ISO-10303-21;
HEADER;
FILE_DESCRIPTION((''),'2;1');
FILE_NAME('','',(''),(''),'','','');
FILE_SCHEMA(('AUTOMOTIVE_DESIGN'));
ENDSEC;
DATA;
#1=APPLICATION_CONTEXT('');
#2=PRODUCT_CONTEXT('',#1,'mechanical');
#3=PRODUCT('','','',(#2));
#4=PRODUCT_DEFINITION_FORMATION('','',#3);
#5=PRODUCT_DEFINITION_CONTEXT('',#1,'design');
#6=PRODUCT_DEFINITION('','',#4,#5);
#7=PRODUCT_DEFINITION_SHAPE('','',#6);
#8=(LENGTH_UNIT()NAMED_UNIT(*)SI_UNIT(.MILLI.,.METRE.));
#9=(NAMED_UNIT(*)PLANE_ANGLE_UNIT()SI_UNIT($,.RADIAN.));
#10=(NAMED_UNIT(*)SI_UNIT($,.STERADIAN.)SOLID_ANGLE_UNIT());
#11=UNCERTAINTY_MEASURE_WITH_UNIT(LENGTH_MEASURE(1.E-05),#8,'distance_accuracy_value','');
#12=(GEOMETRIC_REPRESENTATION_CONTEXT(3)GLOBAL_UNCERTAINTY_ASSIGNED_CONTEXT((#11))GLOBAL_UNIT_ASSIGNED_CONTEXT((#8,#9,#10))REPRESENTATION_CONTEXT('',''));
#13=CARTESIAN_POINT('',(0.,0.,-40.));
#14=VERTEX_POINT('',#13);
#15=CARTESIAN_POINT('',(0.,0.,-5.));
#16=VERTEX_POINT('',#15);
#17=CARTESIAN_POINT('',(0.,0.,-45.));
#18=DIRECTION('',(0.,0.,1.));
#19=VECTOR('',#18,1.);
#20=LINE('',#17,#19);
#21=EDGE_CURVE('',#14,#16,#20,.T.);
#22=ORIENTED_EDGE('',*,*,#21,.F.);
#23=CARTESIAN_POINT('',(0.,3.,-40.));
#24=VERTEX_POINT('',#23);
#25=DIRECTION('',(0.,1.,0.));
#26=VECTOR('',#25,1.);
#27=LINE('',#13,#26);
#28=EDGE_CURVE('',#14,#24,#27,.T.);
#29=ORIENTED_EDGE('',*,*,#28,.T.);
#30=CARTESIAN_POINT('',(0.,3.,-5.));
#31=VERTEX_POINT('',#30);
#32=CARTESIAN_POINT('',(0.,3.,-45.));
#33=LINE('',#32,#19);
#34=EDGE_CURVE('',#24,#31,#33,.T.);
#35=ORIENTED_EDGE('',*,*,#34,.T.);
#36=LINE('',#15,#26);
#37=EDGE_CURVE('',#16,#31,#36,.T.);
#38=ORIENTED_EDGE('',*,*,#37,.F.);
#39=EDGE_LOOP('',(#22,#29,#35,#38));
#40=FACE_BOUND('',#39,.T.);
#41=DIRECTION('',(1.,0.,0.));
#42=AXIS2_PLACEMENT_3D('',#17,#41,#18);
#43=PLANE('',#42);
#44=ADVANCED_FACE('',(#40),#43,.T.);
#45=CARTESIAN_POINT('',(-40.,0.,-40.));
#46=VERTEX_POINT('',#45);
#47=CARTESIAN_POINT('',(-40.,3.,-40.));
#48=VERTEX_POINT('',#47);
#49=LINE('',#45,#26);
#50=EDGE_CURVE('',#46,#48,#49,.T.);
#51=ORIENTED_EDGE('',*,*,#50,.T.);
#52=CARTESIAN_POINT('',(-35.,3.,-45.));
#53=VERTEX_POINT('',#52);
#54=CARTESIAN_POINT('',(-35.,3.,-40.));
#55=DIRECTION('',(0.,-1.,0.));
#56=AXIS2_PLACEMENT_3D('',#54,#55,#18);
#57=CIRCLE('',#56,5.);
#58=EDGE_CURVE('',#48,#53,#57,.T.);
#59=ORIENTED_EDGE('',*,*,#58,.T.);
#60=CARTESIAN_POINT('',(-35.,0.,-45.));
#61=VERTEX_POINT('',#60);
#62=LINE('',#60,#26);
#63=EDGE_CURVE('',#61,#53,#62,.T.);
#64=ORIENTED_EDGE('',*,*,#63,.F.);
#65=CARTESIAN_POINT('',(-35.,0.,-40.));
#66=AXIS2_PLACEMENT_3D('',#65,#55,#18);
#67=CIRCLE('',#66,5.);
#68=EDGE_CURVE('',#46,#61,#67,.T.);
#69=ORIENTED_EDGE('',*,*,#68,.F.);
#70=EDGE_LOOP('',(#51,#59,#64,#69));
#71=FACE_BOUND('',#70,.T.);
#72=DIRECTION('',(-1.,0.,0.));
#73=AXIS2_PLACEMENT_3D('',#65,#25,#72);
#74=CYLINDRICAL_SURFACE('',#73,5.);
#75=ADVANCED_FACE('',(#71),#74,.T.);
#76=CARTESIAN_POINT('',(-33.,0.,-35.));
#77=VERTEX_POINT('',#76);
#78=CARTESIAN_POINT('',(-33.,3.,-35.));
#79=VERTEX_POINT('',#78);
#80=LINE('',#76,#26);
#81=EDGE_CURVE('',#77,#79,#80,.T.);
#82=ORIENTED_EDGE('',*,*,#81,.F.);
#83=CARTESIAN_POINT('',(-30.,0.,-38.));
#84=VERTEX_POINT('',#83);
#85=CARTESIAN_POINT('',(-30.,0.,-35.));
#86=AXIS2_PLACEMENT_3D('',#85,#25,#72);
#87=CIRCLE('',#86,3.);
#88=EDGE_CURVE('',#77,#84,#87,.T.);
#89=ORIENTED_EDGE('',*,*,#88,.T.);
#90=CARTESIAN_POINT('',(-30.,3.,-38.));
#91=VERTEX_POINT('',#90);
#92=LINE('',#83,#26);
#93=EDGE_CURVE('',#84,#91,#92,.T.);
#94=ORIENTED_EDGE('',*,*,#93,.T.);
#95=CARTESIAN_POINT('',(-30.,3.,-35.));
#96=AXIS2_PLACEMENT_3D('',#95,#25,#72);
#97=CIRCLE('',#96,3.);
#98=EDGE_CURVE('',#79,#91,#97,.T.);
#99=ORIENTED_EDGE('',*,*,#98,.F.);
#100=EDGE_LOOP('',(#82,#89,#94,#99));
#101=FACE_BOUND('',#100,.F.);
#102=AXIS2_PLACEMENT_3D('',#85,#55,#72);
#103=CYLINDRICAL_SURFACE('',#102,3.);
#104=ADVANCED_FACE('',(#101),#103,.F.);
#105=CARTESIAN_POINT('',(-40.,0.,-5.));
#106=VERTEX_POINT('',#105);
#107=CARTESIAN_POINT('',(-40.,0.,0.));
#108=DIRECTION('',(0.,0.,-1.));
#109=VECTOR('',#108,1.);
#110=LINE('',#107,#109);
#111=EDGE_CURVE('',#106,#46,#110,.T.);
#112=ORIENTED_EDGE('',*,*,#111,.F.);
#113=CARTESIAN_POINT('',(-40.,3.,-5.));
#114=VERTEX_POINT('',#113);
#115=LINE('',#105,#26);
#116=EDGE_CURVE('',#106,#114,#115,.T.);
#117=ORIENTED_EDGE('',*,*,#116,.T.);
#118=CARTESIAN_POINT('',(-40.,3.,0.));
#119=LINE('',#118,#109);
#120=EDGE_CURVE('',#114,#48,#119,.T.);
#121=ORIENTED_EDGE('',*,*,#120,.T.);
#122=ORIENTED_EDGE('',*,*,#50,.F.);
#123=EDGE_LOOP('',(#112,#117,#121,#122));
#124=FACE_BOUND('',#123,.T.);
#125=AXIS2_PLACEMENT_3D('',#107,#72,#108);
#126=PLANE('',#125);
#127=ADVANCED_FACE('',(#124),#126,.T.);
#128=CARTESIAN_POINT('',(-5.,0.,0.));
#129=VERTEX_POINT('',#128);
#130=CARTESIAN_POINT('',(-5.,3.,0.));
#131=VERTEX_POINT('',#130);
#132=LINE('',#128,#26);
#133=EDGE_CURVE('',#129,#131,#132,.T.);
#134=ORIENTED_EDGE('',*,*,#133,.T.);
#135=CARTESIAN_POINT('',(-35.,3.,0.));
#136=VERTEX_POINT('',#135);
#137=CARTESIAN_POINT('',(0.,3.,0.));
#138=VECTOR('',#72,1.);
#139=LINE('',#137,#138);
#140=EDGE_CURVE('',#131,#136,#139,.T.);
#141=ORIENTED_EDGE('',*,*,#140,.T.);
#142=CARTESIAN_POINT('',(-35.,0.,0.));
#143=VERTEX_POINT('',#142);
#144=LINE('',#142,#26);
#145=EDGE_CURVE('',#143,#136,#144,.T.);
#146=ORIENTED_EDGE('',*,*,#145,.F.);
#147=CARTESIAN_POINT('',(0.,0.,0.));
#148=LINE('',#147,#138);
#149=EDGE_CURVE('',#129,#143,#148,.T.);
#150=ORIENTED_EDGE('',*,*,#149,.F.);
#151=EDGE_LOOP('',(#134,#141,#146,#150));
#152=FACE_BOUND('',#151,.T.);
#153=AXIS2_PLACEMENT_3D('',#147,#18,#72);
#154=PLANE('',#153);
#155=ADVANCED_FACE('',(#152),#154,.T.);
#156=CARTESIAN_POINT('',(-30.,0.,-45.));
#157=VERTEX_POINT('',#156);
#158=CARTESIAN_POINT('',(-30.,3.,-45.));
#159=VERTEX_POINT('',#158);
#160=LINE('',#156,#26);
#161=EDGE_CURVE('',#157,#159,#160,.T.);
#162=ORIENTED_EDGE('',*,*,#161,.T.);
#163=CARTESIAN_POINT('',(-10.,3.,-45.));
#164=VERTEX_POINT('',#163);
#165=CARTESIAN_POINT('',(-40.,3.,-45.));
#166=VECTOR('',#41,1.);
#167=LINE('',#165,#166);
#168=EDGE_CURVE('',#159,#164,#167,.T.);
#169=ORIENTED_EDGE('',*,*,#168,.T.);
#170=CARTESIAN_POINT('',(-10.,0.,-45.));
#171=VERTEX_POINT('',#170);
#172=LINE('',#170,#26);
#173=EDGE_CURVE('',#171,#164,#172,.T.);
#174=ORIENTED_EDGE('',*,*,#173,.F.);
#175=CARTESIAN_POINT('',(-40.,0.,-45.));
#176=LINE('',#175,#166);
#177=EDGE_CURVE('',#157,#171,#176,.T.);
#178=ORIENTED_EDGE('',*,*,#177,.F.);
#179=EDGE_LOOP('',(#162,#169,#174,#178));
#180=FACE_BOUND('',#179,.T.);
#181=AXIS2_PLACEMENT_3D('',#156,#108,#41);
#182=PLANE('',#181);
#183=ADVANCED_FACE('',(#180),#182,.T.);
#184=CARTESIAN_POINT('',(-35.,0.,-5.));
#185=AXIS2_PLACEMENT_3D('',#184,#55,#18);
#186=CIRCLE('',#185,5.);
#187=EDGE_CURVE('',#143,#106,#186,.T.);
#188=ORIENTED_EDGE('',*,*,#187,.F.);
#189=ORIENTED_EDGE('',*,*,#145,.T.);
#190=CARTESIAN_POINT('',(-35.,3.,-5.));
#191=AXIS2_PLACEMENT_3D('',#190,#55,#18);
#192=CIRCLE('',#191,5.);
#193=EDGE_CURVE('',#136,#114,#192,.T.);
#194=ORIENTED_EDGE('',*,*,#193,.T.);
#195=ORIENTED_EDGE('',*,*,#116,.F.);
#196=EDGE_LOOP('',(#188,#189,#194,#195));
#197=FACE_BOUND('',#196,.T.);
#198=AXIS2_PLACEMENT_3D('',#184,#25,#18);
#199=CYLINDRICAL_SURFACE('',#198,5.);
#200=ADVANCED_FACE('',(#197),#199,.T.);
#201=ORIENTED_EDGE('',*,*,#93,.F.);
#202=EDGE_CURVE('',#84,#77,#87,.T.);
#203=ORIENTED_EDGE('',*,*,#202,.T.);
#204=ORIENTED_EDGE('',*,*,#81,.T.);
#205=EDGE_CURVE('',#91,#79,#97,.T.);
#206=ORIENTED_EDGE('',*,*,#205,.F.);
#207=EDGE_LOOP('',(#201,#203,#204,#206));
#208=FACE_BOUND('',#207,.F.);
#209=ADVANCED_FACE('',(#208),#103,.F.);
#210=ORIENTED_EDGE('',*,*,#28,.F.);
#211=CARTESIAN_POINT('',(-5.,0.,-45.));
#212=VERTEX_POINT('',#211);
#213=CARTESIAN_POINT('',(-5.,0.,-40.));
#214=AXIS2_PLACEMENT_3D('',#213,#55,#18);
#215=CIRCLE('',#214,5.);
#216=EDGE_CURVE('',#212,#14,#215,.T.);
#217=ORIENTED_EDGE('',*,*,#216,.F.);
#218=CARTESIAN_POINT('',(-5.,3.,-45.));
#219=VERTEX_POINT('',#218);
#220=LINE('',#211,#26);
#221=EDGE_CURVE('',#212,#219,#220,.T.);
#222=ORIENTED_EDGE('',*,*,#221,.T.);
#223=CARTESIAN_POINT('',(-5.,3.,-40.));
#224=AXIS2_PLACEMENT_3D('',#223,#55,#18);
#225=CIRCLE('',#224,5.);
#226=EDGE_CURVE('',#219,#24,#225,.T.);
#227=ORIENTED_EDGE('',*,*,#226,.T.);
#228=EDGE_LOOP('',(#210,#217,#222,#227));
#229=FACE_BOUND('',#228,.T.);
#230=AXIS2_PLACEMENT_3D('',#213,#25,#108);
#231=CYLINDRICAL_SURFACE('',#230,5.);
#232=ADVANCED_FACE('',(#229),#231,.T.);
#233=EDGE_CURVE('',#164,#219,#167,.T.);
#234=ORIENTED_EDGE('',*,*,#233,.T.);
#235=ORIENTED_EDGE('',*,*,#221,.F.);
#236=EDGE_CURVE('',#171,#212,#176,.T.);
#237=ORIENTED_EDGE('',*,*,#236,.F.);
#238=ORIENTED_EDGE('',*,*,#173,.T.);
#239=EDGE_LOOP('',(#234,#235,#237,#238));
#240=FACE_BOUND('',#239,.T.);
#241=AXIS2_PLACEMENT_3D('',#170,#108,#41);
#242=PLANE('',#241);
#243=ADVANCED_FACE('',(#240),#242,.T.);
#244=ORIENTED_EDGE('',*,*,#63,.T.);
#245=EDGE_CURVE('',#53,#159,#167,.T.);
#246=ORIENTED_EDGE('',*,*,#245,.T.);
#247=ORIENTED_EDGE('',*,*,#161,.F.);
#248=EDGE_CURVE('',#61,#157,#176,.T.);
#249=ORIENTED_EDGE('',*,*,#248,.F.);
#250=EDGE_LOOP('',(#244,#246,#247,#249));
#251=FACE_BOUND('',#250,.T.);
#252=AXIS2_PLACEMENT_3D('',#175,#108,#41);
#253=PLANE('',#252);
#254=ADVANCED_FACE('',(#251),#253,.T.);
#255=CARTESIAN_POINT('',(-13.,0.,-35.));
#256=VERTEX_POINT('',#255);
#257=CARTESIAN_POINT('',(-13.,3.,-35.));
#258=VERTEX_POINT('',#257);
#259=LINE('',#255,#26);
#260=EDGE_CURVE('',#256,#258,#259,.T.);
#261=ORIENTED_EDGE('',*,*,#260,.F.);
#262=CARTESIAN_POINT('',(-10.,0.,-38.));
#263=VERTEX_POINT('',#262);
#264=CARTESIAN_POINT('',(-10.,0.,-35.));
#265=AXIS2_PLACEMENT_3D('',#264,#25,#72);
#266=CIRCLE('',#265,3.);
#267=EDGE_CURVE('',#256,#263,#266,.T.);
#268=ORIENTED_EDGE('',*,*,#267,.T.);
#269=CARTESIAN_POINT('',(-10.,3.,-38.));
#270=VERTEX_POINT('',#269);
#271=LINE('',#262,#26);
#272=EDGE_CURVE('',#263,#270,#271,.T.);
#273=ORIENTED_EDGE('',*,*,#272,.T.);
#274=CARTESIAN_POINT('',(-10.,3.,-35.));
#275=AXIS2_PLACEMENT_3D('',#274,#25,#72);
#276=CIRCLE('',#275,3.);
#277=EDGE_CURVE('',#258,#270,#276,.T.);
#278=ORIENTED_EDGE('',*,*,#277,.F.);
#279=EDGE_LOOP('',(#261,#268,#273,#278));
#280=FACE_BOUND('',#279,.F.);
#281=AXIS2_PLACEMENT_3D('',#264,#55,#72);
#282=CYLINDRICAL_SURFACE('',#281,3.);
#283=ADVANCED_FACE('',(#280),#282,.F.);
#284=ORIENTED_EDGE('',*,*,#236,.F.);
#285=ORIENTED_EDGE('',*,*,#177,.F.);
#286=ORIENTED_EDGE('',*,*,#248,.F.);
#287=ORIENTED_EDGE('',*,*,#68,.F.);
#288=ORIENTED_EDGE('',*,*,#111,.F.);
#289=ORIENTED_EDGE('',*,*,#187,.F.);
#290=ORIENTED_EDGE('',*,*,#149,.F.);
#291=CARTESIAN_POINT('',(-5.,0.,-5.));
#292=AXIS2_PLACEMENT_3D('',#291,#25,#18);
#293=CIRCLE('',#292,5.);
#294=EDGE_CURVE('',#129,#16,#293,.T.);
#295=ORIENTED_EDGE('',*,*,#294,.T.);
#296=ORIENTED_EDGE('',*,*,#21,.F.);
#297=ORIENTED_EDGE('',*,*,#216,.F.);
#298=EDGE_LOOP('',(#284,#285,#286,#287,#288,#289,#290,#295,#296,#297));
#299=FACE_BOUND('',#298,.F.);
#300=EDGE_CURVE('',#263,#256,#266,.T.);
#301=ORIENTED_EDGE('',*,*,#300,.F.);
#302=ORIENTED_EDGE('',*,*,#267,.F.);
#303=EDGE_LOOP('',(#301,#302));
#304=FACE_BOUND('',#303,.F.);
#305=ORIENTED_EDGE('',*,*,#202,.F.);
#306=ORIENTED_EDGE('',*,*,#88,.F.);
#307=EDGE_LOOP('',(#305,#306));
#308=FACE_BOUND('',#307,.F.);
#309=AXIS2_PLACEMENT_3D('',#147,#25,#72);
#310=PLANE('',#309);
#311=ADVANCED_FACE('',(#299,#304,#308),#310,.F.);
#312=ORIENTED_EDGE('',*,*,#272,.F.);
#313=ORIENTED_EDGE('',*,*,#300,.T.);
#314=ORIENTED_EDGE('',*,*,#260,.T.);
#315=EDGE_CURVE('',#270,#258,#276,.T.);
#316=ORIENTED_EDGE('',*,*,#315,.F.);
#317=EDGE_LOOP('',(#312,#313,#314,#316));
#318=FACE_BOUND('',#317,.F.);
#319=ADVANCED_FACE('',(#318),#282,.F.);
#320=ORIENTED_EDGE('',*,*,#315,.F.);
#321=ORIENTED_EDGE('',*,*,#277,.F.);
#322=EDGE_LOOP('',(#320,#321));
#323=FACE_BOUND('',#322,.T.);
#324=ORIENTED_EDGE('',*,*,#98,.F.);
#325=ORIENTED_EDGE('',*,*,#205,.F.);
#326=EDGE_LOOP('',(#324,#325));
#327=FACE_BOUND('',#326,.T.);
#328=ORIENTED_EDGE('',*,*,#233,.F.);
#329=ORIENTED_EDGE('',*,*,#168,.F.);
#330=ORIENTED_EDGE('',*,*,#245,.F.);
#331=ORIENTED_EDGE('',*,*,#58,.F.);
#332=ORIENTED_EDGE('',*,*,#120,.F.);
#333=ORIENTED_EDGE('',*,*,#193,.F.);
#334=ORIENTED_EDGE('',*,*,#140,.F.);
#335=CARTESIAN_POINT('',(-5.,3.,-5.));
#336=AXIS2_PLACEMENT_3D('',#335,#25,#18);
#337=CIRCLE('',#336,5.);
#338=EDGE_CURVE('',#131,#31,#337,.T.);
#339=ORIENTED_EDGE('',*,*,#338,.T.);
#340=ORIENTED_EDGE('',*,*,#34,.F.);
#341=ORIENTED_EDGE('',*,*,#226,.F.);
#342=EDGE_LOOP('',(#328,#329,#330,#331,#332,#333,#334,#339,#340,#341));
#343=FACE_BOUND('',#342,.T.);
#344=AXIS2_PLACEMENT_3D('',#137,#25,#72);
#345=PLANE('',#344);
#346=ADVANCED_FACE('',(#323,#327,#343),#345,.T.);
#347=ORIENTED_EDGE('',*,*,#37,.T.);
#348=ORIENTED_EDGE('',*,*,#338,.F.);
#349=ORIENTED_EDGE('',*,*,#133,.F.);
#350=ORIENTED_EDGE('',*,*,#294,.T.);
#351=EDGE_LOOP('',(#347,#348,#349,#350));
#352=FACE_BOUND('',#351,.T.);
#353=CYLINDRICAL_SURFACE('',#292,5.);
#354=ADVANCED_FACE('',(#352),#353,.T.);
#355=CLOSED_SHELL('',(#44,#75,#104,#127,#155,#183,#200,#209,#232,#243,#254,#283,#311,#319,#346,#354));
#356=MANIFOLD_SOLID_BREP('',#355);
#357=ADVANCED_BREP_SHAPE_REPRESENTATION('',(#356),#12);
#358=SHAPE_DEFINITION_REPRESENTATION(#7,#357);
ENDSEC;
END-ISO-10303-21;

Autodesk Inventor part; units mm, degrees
ref_plane "YZ Plane" through (0, 0, 0) normal (1, 0, 0) x (0, 1, 0)
ref_plane "XZ Plane" through (0, 0, 0) normal (0, 1, 0) x (-1, 0, 0)
ref_plane "XY Plane" through (0, 0, 0) normal (0, 0, 1) x (1, 0, 0)
sketch "Sketch20" plane through (0, 0, 0) normal (0, 1, 0) x (-1, 0, 0)
  line L0 (0, 0) -> (40, 0)
  line L1 (40, 0) -> (40, -45)
  line L2 (40, -45) -> (0, -45)
  line L3 (0, -45) -> (0, 0)
  line L4 (40, -45) -> (30, -45)
  line L5 (30, -45) -> (30, -35)
  line L6 (0, -45) -> (10, -45)
  line L7 (10, -45) -> (10, -35)
  circle A0 centre (30, -35) radius 3
  circle A1 centre (10, -35) radius 3
  dimension "d117" = 40
  dimension "d118" = 45
  dimension "d119" = 10
  dimension "d120" = 10
  dimension "d121" = 10
  dimension "d122" = 10
  dimension "d123" = 6
  dimension "d124" = 6
extrude "Extrusion20" add sketch "Sketch20" along normal blind 3
fillet "Fillet6" radius 5 4 edges at (0, 1.5, 0) (-40, 1.5, 0) (0, 1.5, -45) (-40, 1.5, -45)
properties part number "MagnetHolder_Special"
